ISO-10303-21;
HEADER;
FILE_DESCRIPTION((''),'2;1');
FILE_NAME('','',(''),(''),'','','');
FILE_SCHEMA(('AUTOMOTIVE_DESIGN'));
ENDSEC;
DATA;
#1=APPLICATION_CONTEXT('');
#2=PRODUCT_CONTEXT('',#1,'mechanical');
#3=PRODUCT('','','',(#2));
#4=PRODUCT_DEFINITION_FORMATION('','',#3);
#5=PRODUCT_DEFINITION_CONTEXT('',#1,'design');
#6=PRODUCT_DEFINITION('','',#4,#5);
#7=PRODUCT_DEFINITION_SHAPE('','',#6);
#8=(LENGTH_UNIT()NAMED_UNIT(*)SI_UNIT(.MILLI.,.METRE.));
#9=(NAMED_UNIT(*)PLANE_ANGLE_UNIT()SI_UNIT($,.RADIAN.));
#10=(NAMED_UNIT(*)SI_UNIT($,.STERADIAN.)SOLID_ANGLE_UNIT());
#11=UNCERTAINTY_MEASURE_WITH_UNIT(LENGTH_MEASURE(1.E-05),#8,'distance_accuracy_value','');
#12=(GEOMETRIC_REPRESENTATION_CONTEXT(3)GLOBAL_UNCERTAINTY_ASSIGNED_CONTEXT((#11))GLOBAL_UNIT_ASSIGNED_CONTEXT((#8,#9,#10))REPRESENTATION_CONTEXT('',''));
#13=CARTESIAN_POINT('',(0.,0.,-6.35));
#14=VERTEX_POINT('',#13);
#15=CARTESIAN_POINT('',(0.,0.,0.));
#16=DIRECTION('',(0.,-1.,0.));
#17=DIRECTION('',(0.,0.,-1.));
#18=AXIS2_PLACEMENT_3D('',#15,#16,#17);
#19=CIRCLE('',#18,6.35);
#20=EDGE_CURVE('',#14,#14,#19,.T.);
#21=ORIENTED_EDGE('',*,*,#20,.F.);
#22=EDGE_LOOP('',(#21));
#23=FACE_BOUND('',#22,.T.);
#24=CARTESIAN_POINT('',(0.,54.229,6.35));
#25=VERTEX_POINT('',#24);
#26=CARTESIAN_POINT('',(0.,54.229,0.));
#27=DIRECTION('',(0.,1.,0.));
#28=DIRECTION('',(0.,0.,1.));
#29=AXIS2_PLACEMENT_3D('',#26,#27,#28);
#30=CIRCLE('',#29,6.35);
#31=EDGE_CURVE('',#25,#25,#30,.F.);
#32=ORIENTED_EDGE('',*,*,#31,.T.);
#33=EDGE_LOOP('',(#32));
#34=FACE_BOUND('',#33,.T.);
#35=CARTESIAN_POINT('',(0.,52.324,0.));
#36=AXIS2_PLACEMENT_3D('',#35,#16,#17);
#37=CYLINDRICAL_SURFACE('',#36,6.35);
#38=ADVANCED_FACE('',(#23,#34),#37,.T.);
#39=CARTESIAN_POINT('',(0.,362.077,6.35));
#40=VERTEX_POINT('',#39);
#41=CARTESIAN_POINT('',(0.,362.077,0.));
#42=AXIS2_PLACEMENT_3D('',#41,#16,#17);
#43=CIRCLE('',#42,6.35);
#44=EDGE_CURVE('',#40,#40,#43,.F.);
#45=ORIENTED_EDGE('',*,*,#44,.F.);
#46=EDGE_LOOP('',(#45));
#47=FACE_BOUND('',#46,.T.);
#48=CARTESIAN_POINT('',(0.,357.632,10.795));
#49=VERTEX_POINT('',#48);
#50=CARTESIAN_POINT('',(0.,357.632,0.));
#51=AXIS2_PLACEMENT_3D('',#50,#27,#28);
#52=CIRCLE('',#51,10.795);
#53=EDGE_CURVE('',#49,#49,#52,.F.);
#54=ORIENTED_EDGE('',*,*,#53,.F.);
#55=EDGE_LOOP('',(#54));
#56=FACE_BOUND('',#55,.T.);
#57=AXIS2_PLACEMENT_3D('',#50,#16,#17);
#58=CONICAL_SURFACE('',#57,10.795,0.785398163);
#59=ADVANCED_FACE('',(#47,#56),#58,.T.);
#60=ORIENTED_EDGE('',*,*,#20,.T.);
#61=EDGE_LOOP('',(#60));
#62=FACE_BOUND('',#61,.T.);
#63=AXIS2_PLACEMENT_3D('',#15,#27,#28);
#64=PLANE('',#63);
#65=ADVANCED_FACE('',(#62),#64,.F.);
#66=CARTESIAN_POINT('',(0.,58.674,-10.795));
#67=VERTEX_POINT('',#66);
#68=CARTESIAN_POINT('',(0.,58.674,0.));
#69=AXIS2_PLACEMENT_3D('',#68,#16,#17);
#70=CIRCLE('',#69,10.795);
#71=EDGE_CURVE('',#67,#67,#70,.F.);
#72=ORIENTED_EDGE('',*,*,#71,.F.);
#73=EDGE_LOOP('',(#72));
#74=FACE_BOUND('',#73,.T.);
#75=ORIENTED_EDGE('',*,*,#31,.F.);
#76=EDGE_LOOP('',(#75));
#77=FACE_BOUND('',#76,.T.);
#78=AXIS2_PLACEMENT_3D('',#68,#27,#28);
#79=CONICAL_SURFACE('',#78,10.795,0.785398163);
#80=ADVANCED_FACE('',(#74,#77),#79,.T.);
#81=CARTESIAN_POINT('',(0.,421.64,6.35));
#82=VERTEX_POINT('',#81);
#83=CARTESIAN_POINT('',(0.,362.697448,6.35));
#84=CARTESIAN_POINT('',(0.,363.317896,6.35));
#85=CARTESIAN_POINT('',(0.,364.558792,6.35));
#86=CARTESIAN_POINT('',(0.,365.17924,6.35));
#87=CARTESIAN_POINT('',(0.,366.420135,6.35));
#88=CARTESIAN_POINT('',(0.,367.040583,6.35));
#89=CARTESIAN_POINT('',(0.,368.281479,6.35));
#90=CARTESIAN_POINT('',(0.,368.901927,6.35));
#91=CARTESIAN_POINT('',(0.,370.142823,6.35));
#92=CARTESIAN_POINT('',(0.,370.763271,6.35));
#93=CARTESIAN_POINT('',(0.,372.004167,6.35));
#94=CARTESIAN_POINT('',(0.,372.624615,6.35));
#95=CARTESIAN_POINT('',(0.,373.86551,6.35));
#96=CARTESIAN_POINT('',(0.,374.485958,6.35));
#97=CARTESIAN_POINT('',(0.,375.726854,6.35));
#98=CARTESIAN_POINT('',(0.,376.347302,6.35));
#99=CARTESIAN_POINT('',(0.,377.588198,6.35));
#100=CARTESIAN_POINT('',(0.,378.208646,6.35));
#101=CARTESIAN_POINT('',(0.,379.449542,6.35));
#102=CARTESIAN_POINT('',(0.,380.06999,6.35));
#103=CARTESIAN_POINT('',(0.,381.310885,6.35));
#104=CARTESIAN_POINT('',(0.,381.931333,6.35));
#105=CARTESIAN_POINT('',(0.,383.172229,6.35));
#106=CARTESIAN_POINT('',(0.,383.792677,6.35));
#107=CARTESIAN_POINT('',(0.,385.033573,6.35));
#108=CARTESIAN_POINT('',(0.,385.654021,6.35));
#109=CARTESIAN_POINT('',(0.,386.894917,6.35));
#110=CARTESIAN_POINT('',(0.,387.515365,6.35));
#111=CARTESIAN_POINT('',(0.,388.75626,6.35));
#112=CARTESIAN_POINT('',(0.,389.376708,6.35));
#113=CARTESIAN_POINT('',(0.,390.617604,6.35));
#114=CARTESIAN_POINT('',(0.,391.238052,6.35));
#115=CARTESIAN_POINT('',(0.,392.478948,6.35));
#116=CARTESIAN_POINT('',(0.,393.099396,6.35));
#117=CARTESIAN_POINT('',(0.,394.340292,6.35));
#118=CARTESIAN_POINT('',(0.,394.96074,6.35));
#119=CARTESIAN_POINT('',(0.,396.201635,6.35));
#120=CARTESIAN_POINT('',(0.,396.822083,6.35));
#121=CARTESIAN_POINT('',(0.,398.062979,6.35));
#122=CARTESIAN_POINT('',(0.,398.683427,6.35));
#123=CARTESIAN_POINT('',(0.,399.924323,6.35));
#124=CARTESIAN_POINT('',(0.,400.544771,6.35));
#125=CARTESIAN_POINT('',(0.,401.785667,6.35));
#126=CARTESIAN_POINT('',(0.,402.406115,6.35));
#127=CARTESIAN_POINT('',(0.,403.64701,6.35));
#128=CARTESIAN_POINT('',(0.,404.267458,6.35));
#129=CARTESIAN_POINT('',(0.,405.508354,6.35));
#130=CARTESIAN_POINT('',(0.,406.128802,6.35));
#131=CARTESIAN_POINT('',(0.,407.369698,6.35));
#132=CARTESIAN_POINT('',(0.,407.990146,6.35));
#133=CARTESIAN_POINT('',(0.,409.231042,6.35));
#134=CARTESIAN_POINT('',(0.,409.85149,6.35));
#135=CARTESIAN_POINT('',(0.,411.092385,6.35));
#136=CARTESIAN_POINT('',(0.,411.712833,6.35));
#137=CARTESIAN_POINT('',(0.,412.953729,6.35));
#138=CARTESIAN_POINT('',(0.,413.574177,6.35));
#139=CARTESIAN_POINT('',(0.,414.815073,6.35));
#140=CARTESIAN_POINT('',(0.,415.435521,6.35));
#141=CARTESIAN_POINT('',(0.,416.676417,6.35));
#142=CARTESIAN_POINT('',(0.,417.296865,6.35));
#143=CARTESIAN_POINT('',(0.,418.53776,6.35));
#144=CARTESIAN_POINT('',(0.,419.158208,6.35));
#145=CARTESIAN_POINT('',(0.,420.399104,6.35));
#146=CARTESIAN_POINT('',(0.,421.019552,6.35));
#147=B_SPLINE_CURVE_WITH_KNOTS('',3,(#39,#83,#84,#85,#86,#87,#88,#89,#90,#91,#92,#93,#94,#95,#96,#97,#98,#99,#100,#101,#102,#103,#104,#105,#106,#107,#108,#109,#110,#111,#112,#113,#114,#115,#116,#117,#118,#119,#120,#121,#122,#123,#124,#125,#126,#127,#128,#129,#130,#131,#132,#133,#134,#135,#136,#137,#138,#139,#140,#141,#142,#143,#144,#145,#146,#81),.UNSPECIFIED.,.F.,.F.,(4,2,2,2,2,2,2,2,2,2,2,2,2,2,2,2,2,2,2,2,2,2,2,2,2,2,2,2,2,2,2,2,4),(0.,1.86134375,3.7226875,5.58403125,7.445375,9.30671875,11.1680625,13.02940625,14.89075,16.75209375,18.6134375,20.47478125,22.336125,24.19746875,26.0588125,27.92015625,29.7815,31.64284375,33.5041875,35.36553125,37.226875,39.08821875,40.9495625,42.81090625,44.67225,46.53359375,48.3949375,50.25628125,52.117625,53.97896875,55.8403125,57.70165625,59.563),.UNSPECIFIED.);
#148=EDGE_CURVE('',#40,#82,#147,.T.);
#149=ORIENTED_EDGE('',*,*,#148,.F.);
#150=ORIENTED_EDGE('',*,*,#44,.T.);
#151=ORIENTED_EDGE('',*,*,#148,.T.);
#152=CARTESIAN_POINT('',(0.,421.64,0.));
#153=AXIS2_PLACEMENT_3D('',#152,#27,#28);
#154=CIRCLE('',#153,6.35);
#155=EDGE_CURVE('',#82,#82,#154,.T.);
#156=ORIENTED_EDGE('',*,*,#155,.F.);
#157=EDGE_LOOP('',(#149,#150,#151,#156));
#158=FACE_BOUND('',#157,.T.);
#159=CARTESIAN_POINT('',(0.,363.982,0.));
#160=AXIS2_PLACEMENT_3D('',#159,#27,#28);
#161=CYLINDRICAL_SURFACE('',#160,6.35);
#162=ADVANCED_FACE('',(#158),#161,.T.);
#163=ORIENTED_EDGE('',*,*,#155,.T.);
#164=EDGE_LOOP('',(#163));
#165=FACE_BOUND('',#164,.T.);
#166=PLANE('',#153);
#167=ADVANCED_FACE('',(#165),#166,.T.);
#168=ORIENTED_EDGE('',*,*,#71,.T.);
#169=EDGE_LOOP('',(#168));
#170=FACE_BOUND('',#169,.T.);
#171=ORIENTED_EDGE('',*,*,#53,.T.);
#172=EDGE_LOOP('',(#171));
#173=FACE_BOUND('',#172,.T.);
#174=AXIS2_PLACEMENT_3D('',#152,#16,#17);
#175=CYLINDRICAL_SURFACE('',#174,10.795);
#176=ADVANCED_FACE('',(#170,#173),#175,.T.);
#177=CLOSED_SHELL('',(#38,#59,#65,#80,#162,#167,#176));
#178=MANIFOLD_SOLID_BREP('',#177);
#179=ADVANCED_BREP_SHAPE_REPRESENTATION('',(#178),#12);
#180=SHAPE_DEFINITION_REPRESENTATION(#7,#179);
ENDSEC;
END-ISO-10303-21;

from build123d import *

# Parameters (mm, degrees)
SKETCH1_R           = 6.35
BOSS_EXTRUDE1_DEPTH = 421.64
SKETCH2_R           = 10.795
BOSS_EXTRUDE2_DEPTH = 421.64
SKETCH3_R           = 25.4
SKETCH3_R_2         = 6.35
CUT_EXTRUDE1_DEPTH  = 52.324
CUT_EXTRUDE2_START  = -57.658
SKETCH4_R           = 25.4
SKETCH4_R_2         = 6.35
CUT_EXTRUDE2_DEPTH  = 57.658
CHAMFER1_SIZE       = 6.35


with BuildPart() as part:
    # Sketch1 → Boss-Extrude1 (new body)
    with BuildSketch(Plane(origin=(0, 0, 0), x_dir=(1, 0, 0), z_dir=(0, 1, 0))):
        with Locations(Location((0, 0, 0), (0, 0, 270))):
            Circle(SKETCH1_R)
    extrude(amount=BOSS_EXTRUDE1_DEPTH)

    # Sketch2 → Boss-Extrude2 (add)
    with BuildSketch(Plane(origin=(0, 0, 0), x_dir=(-1, 0, 0), z_dir=(0, -1, 0))):
        with Locations(Location((0, 0, 0), (0, 0, 90))):
            Circle(SKETCH2_R)
    extrude(amount=-BOSS_EXTRUDE2_DEPTH)

    # Sketch3 → Cut-Extrude1 (cut)
    with BuildSketch(Plane.XZ):
        Circle(SKETCH3_R)
        with Locations(Location((0, 0, 0), (0, 0, 270))):
            Circle(SKETCH3_R_2, mode=Mode.SUBTRACT)
    extrude(amount=-CUT_EXTRUDE1_DEPTH, mode=Mode.SUBTRACT)

    # Sketch4 → Cut-Extrude2 (cut)
    with BuildSketch(Plane(origin=(0, 421.64, 0), x_dir=(1, 0, 0), z_dir=(0, 1, 0)).offset(CUT_EXTRUDE2_START)):
        Circle(SKETCH4_R)
        with Locations(Location((0, 0, 0), (0, 0, 90))):
            Circle(SKETCH4_R_2, mode=Mode.SUBTRACT)
    extrude(amount=CUT_EXTRUDE2_DEPTH, mode=Mode.SUBTRACT)

    # Chamfer1
    # the kernel refuses this chamfer: 6.35 mm, written as the material it takes off along each edge
    with BuildSketch(Plane(origin=(0, 52.324, 0), x_dir=(0, 0, -1), z_dir=(-1, 0, 0))) as chamfer1_piece_1_section:
        Polygon((10.795, -CHAMFER1_SIZE), (10.795 - CHAMFER1_SIZE, 0), (10.795, 0), align=None)
    chamfer1_piece_1 = revolve(axis=Axis((0, 52.324, 0), (0, -1, 0)), mode=Mode.PRIVATE)
    chamfer1_piece_1 = chamfer1_piece_1 - Plane(origin=(0, 56.4676015, 0), x_dir=(0, 0, -1), z_dir=(0, -1, 0)) * Cylinder(6.35, 44, mode=Mode.PRIVATE)
    add(chamfer1_piece_1, mode=Mode.SUBTRACT)
    with BuildSketch(Plane(origin=(0, 363.982, 0), x_dir=(0, 0, -1), z_dir=(-1, 0, 0))) as chamfer1_piece_2_section:
        Polygon((10.795, CHAMFER1_SIZE), (10.795 - CHAMFER1_SIZE, 0), (10.795, 0), align=None)
    chamfer1_piece_2 = revolve(axis=Axis((0, 363.982, 0), (0, -1, 0)), mode=Mode.PRIVATE)
    chamfer1_piece_2 = chamfer1_piece_2 - Plane(origin=(0, 359.8383985, 0), x_dir=(0, 0, -1), z_dir=(0, -1, 0)) * Cylinder(6.35, 44, mode=Mode.PRIVATE)
    add(chamfer1_piece_2, mode=Mode.SUBTRACT)


solid = part.part
